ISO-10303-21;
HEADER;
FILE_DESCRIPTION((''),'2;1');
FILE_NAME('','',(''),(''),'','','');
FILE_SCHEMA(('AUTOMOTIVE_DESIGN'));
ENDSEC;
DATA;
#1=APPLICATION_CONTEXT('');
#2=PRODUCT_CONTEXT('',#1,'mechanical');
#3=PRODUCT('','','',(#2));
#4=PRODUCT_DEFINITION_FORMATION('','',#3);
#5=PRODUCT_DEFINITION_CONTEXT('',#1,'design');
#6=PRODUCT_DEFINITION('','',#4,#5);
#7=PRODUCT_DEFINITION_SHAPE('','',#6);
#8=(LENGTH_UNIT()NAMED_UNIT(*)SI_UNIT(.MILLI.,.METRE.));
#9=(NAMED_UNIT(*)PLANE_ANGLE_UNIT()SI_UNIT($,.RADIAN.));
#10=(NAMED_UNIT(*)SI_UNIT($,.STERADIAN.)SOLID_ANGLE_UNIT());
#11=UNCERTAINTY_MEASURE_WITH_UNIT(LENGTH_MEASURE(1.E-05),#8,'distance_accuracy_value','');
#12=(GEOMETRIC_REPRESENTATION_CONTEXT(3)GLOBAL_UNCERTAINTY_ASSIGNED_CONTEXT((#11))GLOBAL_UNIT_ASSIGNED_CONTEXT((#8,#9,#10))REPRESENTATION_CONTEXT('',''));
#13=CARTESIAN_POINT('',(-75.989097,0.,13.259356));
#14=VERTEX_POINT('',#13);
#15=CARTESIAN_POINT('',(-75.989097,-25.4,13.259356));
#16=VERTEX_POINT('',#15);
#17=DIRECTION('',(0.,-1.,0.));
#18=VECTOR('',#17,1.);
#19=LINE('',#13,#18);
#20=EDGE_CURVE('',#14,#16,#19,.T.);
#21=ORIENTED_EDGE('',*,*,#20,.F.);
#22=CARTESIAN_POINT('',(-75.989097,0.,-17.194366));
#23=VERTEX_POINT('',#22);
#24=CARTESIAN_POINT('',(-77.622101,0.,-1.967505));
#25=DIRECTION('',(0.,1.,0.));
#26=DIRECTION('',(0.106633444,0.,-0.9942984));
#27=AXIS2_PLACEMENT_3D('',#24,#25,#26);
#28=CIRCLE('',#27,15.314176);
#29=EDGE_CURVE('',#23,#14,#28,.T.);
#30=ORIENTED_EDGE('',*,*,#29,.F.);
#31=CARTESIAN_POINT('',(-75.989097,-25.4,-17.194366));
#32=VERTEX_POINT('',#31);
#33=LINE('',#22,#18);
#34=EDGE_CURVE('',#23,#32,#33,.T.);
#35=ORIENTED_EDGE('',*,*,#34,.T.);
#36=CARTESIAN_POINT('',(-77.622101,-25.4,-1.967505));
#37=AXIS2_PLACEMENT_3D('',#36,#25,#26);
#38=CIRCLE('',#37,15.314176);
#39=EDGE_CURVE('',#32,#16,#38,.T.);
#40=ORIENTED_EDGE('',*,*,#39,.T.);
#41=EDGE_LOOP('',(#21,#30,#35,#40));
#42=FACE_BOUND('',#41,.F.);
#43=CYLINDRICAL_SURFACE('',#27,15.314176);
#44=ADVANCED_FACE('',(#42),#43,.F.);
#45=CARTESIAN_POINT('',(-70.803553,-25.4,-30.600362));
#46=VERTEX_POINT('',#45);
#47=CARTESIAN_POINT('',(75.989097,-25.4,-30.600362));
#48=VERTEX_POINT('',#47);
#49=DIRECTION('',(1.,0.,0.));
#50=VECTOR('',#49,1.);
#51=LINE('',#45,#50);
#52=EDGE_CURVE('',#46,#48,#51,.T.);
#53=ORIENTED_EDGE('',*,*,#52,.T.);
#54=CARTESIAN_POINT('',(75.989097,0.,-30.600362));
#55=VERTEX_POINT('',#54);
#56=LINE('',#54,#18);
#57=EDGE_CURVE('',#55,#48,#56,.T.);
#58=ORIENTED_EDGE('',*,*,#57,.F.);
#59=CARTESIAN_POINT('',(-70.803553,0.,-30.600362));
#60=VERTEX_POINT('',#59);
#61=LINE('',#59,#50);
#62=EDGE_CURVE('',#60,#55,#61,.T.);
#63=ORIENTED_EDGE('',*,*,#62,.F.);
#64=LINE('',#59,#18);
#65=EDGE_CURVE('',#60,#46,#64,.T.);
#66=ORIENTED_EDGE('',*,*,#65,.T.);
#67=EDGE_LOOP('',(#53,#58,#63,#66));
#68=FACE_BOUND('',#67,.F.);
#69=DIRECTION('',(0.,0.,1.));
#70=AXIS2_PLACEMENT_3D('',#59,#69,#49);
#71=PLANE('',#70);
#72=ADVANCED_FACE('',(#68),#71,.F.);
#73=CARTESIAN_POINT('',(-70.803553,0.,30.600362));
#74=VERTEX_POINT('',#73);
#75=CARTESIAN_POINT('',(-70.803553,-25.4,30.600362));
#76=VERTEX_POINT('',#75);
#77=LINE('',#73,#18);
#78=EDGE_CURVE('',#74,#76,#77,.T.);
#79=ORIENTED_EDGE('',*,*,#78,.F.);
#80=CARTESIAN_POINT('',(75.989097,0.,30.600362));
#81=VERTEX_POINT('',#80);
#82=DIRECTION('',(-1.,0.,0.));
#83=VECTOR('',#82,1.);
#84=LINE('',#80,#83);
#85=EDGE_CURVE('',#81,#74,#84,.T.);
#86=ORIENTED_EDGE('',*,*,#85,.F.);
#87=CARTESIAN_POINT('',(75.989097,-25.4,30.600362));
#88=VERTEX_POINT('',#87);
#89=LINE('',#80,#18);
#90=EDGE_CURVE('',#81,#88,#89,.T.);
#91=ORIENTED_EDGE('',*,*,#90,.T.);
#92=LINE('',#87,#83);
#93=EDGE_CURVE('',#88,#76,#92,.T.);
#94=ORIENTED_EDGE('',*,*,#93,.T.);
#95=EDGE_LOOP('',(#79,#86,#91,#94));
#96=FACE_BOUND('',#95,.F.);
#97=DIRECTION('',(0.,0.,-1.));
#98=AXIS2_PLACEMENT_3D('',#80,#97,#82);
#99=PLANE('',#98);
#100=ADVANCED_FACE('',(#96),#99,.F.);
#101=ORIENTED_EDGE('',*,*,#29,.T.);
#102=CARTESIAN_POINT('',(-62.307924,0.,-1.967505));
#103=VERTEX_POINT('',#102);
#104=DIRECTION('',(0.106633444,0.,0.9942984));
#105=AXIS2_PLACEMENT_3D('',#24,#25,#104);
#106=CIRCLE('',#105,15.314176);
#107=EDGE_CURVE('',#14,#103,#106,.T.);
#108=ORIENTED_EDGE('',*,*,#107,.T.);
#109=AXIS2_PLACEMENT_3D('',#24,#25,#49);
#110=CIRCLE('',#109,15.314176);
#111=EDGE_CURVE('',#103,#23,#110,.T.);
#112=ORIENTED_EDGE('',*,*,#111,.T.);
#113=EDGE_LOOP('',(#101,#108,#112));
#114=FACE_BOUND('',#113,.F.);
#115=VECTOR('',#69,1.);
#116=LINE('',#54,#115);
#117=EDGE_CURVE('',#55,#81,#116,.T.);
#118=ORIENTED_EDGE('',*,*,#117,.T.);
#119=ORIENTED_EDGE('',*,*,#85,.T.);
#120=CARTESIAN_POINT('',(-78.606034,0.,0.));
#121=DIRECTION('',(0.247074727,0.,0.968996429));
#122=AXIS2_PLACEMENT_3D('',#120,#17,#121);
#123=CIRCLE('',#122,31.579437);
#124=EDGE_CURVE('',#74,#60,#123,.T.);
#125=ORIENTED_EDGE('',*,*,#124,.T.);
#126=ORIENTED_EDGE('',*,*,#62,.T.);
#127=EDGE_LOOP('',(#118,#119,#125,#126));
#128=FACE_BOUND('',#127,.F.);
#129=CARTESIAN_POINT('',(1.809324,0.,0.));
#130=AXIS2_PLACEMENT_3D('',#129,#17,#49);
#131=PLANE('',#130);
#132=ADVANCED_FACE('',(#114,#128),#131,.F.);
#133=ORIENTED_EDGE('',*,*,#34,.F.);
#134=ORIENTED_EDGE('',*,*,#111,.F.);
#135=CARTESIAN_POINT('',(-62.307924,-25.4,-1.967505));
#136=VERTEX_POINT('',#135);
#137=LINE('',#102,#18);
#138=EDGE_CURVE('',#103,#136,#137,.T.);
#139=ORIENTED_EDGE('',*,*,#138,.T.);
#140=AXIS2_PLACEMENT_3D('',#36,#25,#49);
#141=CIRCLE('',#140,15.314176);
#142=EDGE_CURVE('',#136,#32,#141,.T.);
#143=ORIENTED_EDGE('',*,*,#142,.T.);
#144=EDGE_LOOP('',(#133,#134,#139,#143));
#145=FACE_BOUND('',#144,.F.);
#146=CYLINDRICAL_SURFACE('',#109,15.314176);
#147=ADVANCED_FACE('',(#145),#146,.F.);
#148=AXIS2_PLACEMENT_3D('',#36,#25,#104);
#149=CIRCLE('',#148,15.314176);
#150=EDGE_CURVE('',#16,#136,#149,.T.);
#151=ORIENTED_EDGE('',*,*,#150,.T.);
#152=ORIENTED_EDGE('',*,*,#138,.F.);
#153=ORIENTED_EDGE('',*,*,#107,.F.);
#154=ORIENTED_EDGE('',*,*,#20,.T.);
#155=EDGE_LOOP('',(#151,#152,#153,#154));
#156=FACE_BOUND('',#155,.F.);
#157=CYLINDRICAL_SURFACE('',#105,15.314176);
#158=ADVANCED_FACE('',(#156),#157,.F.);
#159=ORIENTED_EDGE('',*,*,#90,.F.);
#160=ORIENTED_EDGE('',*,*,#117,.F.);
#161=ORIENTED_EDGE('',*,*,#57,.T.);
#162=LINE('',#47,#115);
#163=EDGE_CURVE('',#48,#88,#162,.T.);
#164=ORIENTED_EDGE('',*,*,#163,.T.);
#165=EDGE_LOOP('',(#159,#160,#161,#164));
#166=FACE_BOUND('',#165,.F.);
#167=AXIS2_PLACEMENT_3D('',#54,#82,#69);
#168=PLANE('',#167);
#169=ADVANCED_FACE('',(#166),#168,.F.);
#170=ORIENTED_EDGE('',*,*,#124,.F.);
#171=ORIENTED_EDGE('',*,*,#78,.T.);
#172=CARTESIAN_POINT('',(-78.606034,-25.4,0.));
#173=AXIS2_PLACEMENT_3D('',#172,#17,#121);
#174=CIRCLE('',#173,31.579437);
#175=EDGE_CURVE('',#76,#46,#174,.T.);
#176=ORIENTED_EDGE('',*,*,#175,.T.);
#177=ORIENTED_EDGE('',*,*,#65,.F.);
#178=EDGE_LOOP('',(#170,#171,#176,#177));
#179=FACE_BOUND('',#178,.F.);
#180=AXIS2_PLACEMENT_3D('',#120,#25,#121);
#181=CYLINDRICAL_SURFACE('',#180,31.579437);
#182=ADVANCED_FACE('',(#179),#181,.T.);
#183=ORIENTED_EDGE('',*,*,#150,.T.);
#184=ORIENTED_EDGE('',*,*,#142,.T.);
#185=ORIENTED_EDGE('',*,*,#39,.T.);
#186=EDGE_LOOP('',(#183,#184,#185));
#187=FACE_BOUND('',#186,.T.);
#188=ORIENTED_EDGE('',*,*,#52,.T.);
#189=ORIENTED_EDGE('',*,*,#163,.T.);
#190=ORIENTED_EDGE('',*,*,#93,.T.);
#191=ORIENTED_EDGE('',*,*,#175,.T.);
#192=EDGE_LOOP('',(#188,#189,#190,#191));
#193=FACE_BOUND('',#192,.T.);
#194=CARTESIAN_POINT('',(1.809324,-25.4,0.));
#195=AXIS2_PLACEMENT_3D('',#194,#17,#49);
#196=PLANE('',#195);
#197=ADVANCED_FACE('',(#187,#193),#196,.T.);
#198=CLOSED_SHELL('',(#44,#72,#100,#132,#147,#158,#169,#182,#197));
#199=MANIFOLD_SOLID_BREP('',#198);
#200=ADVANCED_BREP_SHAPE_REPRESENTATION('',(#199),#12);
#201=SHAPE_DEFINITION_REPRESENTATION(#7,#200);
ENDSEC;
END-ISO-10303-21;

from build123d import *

# Parameters (mm, degrees)
F1_DEPTH = 25.4
F3_DEPTH = 25.4


# Not quite as in the source:
# - a feature names something its author has since deleted; it is built from what else it names


with BuildPart() as f1:
    # F0 (on Front) → F1 (new body)
    with BuildSketch(Plane.XZ):
        with BuildLine():
            Line((75.9890973568, -30.600361526), (75.9890973568, 30.600361526))
            Line((75.9890973568, 30.600361526), (-70.8035532623, 30.600361526))
            ThreePointArc((-70.8035532623, 30.600361526), (-53.6695268316, 19.3760533103), (-47.026597149, 0))
            ThreePointArc((-47.026597149, 0), (-53.6695268316, -19.3760533103), (-70.8035532623, -30.600361526))
            Line((-70.8035532623, -30.600361526), (75.9890973568, -30.600361526))
        make_face()
    extrude(amount=F1_DEPTH)

    # F0 (on Front) → F3 (join)
    with BuildSketch(Plane.XZ):
        with BuildLine():
            Line((75.9890973568, -30.600361526), (75.9890973568, 30.600361526))
            Line((75.9890973568, 30.600361526), (-70.8035532623, 30.600361526))
            ThreePointArc((-70.8035532623, 30.600361526), (-53.6695268316, 19.3760533103), (-47.026597149, 0))
            ThreePointArc((-47.026597149, 0), (-53.6695268316, -19.3760533103), (-70.8035532623, -30.600361526))
            Line((-70.8035532623, -30.600361526), (75.9890973568, -30.600361526))
        make_face()
        with BuildLine():
            ThreePointArc((-47.026597149, 0), (-53.6695268316, 19.3760533103), (-70.8035532623, 30.600361526))
            Line((-70.8035532623, 30.600361526), (-75.9890973568, 30.600361526))
            Line((-75.9890973568, 30.600361526), (-75.9890973568, 13.2593563534))
            ThreePointArc((-75.9890973568, 13.2593563534), (-66.2306105471, 8.26762835), (-62.3079244328, -1.9675046206))
            ThreePointArc((-62.3079244328, -1.9675046206), (-66.2306105471, -12.2026375911), (-75.9890973568, -17.1943655945))
            Line((-75.9890973568, -17.1943655945), (-75.9890973568, -30.600361526))
            Line((-75.9890973568, -30.600361526), (-70.8035532623, -30.600361526))
            ThreePointArc((-70.8035532623, -30.600361526), (-53.6695268316, -19.3760533103), (-47.026597149, 0))
        make_face()
        with BuildLine():
            Line((-75.9890973568, 30.600361526), (-70.8035532623, 30.600361526))
            ThreePointArc((-70.8035532623, 30.600361526), (-110.1854708241, 0), (-70.8035532623, -30.600361526))
            Line((-70.8035532623, -30.600361526), (-75.9890973568, -30.600361526))
            Line((-75.9890973568, -30.600361526), (-75.9890973568, -17.1943655945))
            ThreePointArc((-75.9890973568, -17.1943655945), (-92.9362769889, -1.9675046206), (-75.9890973568, 13.2593563534))
            Line((-75.9890973568, 13.2593563534), (-75.9890973568, 30.600361526))
        make_face()
    extrude(amount=F3_DEPTH)


solid = f1.part
